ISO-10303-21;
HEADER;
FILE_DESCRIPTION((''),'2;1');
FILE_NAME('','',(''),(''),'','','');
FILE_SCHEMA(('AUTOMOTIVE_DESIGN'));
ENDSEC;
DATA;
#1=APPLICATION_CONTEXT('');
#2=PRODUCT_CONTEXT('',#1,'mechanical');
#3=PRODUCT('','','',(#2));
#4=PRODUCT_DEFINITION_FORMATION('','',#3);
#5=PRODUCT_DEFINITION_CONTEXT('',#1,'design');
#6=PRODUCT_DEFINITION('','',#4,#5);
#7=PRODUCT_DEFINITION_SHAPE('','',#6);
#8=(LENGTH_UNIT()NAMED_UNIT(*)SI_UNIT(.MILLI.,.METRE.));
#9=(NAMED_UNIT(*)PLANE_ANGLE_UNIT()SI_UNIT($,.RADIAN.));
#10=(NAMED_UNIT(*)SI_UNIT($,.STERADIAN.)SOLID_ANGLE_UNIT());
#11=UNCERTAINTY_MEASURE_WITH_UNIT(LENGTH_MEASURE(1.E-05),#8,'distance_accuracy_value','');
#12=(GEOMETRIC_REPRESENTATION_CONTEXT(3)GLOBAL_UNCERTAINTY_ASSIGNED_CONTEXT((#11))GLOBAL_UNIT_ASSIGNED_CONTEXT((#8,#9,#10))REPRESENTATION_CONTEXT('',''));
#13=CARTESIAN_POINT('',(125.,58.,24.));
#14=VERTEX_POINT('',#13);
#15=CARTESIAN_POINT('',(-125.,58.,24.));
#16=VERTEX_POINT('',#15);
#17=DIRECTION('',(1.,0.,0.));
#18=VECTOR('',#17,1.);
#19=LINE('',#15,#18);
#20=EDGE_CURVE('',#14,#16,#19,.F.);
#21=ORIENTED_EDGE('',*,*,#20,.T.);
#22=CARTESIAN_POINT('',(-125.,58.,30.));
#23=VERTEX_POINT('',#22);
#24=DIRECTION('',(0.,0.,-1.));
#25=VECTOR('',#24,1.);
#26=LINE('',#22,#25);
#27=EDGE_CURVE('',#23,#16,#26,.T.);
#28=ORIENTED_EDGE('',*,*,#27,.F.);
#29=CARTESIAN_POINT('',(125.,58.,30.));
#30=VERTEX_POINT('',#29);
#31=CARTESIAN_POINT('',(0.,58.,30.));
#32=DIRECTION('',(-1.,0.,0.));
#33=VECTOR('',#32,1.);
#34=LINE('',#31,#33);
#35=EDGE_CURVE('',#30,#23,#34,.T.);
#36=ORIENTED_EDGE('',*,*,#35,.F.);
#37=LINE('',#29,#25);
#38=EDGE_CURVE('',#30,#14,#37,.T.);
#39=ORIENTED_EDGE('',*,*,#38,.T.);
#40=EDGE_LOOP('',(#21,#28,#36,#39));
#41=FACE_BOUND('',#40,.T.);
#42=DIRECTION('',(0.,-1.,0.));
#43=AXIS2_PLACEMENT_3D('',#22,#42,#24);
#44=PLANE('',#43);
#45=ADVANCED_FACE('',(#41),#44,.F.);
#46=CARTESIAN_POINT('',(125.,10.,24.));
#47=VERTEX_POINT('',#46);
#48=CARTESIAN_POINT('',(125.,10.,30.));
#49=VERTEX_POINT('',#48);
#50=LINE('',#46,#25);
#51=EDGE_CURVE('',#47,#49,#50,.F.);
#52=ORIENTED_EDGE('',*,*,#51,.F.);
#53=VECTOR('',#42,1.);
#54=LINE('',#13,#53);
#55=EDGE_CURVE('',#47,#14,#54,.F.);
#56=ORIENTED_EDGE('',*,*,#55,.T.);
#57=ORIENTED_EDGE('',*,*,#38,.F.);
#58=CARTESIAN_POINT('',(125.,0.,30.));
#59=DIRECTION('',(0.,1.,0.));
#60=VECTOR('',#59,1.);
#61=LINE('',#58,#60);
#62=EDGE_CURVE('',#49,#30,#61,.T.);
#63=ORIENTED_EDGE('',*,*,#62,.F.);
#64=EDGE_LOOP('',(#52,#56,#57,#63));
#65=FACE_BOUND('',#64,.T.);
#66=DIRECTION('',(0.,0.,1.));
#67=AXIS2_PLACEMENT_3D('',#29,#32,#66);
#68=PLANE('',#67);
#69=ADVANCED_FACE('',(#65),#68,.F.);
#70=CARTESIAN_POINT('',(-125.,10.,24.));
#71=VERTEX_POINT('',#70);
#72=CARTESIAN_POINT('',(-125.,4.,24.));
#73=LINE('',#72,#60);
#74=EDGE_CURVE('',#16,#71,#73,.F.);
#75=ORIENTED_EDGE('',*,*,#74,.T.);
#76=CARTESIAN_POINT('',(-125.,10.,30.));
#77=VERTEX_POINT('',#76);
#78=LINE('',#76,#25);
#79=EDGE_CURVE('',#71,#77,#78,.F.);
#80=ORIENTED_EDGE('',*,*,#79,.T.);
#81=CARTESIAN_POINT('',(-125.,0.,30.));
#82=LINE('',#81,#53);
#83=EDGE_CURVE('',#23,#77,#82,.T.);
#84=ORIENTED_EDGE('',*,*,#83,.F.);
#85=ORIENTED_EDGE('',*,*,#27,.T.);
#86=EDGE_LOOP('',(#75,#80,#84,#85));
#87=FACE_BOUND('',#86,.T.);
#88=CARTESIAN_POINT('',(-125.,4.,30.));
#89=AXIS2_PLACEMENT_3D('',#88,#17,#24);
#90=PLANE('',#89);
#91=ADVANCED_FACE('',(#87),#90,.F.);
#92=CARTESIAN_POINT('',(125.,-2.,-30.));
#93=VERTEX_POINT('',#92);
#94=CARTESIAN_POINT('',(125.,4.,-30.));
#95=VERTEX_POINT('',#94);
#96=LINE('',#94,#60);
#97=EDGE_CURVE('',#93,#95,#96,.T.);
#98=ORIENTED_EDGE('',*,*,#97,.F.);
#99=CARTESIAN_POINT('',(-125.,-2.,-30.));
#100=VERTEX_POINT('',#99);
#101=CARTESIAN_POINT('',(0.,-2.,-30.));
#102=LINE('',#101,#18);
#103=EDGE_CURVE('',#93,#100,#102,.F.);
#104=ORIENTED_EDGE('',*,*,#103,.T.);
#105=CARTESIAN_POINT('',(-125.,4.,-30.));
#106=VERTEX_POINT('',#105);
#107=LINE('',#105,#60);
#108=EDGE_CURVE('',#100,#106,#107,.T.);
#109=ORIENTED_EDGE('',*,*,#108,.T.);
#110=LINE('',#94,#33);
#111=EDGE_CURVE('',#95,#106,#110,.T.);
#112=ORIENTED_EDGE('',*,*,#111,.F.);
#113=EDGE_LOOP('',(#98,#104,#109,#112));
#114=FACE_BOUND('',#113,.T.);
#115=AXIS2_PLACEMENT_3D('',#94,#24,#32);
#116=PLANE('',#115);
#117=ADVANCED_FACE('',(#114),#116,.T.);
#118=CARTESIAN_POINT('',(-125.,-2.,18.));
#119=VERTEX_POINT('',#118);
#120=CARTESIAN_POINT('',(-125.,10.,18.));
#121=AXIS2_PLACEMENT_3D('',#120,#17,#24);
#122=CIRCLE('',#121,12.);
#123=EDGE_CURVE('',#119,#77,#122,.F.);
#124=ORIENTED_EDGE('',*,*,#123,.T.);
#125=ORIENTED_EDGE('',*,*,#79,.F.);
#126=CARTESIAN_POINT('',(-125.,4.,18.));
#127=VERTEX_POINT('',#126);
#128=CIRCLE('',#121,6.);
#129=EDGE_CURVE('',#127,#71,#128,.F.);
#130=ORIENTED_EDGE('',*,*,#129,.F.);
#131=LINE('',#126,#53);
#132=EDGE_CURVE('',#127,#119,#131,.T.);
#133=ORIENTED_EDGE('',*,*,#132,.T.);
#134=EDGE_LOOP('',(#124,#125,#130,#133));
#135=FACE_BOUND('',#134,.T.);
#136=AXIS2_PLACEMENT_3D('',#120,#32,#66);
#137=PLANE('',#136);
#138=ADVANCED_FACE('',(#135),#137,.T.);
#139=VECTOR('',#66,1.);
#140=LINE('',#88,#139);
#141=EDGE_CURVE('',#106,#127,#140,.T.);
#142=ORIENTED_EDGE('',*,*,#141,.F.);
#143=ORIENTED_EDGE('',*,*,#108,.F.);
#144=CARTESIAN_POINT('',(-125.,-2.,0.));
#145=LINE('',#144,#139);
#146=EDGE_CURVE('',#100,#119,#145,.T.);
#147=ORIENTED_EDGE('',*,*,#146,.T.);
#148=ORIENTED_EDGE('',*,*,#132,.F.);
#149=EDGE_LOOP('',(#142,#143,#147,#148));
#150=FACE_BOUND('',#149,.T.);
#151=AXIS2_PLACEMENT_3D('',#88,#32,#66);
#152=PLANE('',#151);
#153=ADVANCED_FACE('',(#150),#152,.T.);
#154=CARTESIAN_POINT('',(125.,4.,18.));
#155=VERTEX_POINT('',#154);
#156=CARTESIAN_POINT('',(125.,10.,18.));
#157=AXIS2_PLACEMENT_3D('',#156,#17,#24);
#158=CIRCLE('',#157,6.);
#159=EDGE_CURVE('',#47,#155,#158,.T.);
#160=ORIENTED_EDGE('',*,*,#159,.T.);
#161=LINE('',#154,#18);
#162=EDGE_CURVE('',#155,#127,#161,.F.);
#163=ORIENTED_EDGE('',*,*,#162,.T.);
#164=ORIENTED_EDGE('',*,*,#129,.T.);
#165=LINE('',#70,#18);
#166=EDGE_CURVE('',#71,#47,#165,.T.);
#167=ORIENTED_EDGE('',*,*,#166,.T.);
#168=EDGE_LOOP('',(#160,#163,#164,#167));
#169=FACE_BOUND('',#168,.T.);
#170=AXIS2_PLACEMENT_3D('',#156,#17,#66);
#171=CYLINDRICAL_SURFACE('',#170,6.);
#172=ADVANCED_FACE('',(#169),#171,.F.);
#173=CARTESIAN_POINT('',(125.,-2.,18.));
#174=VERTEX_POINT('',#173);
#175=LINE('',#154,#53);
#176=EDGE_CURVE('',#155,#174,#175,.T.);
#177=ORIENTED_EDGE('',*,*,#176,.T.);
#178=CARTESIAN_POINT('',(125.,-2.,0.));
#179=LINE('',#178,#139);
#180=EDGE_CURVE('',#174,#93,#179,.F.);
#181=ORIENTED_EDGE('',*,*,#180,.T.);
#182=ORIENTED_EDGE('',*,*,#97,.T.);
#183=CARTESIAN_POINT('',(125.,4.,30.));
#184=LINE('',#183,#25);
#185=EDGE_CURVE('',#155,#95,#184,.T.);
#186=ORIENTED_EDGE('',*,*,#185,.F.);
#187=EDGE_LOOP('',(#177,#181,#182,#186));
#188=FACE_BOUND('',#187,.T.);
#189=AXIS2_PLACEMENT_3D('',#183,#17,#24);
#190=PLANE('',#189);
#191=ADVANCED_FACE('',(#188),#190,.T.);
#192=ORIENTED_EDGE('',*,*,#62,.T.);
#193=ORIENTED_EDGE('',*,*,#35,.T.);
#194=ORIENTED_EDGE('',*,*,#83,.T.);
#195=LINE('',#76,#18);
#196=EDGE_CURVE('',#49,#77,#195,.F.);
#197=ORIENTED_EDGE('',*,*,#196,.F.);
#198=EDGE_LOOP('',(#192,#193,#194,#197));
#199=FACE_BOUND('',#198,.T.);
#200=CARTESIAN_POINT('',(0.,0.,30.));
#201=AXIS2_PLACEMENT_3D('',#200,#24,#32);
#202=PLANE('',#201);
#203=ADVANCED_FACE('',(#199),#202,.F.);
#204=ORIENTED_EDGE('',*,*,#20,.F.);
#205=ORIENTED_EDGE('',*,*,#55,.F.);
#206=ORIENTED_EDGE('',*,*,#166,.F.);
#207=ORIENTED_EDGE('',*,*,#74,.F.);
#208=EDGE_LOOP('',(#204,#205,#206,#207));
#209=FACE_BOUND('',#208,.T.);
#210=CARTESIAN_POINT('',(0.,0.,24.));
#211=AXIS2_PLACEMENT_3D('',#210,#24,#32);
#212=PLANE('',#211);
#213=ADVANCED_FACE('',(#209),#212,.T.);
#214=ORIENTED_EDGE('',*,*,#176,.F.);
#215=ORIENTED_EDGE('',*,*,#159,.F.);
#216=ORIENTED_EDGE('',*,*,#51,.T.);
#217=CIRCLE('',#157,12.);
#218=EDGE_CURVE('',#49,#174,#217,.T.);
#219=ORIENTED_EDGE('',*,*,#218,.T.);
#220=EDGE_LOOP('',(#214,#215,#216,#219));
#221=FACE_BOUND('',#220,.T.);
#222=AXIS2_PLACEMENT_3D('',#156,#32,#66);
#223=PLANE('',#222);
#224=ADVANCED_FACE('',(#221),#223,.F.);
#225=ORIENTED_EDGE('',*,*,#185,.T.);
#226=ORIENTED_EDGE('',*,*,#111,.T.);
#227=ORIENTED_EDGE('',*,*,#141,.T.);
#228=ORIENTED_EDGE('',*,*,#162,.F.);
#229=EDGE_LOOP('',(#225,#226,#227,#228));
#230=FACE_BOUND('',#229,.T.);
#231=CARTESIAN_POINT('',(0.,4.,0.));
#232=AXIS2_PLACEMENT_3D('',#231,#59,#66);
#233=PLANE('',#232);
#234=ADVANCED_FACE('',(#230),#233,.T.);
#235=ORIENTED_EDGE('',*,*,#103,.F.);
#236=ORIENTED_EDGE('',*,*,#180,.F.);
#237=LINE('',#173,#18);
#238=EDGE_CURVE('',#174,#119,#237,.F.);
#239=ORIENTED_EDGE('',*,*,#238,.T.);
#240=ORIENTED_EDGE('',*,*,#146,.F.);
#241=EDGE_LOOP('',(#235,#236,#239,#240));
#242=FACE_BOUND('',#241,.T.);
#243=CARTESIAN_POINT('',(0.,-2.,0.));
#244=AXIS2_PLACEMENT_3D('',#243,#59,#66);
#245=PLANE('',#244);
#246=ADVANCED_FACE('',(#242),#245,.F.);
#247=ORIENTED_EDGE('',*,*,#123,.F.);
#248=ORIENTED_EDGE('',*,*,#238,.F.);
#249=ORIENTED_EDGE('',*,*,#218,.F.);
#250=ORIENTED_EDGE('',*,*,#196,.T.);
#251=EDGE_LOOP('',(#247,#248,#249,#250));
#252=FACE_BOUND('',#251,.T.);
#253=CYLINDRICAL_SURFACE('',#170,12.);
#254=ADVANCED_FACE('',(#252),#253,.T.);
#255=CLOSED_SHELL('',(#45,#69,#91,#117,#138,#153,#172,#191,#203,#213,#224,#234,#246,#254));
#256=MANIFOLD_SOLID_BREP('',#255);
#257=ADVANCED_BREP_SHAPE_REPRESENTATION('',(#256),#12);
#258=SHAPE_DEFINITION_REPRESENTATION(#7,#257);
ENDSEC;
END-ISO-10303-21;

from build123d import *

# Parameters (mm, degrees)
SKETCH1_W                    = 250
SKETCH1_H                    = 60
BOSS_EXTRUDE1_DEPTH          = 4
CONVERT_SOLID1_START         = -125
CONVERT_SOLID1_OUTLINE_W     = 2
CONVERT_SOLID1_OUTLINE_H     = 60
CONVERT_SOLID1_DEPTH         = 250
EDGE_FLANGE1_STRIP_W         = 36
EDGE_FLANGE1_STRIP_H         = 6
EDGE_FLANGE1_STRIP_CUT_DEPTH = 250
EDGE_FLANGE1_DEPTH           = 250


# Read off the part's stored shape, not the designer's step: Convert-Solid1
# Sheet-metal steps are written as plain solids
with BuildPart() as part:
    # Sketch1 → Boss-Extrude1 (new body)
    with BuildSketch(Plane(origin=(0, 0, 0), x_dir=(1, 0, 0), z_dir=(0, 1, 0))):
        Rectangle(SKETCH1_W, SKETCH1_H)
    extrude(amount=BOSS_EXTRUDE1_DEPTH)

    # Convert-Solid1 outline → Convert-Solid1 (add)
    with BuildSketch(Plane.YZ.offset(CONVERT_SOLID1_START)):
        with Locations((-1, 0)):
            Rectangle(CONVERT_SOLID1_OUTLINE_W, CONVERT_SOLID1_OUTLINE_H)
    extrude(amount=CONVERT_SOLID1_DEPTH)

    # Edge-Flange1 strip (across the edge) → Edge-Flange1 strip cut (cut)
    with BuildSketch(Plane(origin=(-125, 4, 30), x_dir=(0, 0, -1), z_dir=(1, 0, 0))):
        with Locations((-6, -3)):
            Rectangle(EDGE_FLANGE1_STRIP_W, EDGE_FLANGE1_STRIP_H)
    extrude(amount=EDGE_FLANGE1_STRIP_CUT_DEPTH, mode=Mode.SUBTRACT)

    # Edge-Flange1 section (across the edge) → Edge-Flange1 (add)
    with BuildSketch(Plane(origin=(-125, 4, 30), x_dir=(0, 0, -1), z_dir=(1, 0, 0))):
        with BuildLine():
            Line((0, 6), (0, 54))
            Line((0, 54), (6, 54))
            Line((6, 54), (6, 6))
            ThreePointArc((6, 6), (7.757359313, 1.757359313), (12, 0))
            Line((12, 0), (12, -6))
            ThreePointArc((12, -6), (3.514718626, -2.485281374), (0, 6))
        make_face()
    extrude(amount=EDGE_FLANGE1_DEPTH)


solid = part.part
